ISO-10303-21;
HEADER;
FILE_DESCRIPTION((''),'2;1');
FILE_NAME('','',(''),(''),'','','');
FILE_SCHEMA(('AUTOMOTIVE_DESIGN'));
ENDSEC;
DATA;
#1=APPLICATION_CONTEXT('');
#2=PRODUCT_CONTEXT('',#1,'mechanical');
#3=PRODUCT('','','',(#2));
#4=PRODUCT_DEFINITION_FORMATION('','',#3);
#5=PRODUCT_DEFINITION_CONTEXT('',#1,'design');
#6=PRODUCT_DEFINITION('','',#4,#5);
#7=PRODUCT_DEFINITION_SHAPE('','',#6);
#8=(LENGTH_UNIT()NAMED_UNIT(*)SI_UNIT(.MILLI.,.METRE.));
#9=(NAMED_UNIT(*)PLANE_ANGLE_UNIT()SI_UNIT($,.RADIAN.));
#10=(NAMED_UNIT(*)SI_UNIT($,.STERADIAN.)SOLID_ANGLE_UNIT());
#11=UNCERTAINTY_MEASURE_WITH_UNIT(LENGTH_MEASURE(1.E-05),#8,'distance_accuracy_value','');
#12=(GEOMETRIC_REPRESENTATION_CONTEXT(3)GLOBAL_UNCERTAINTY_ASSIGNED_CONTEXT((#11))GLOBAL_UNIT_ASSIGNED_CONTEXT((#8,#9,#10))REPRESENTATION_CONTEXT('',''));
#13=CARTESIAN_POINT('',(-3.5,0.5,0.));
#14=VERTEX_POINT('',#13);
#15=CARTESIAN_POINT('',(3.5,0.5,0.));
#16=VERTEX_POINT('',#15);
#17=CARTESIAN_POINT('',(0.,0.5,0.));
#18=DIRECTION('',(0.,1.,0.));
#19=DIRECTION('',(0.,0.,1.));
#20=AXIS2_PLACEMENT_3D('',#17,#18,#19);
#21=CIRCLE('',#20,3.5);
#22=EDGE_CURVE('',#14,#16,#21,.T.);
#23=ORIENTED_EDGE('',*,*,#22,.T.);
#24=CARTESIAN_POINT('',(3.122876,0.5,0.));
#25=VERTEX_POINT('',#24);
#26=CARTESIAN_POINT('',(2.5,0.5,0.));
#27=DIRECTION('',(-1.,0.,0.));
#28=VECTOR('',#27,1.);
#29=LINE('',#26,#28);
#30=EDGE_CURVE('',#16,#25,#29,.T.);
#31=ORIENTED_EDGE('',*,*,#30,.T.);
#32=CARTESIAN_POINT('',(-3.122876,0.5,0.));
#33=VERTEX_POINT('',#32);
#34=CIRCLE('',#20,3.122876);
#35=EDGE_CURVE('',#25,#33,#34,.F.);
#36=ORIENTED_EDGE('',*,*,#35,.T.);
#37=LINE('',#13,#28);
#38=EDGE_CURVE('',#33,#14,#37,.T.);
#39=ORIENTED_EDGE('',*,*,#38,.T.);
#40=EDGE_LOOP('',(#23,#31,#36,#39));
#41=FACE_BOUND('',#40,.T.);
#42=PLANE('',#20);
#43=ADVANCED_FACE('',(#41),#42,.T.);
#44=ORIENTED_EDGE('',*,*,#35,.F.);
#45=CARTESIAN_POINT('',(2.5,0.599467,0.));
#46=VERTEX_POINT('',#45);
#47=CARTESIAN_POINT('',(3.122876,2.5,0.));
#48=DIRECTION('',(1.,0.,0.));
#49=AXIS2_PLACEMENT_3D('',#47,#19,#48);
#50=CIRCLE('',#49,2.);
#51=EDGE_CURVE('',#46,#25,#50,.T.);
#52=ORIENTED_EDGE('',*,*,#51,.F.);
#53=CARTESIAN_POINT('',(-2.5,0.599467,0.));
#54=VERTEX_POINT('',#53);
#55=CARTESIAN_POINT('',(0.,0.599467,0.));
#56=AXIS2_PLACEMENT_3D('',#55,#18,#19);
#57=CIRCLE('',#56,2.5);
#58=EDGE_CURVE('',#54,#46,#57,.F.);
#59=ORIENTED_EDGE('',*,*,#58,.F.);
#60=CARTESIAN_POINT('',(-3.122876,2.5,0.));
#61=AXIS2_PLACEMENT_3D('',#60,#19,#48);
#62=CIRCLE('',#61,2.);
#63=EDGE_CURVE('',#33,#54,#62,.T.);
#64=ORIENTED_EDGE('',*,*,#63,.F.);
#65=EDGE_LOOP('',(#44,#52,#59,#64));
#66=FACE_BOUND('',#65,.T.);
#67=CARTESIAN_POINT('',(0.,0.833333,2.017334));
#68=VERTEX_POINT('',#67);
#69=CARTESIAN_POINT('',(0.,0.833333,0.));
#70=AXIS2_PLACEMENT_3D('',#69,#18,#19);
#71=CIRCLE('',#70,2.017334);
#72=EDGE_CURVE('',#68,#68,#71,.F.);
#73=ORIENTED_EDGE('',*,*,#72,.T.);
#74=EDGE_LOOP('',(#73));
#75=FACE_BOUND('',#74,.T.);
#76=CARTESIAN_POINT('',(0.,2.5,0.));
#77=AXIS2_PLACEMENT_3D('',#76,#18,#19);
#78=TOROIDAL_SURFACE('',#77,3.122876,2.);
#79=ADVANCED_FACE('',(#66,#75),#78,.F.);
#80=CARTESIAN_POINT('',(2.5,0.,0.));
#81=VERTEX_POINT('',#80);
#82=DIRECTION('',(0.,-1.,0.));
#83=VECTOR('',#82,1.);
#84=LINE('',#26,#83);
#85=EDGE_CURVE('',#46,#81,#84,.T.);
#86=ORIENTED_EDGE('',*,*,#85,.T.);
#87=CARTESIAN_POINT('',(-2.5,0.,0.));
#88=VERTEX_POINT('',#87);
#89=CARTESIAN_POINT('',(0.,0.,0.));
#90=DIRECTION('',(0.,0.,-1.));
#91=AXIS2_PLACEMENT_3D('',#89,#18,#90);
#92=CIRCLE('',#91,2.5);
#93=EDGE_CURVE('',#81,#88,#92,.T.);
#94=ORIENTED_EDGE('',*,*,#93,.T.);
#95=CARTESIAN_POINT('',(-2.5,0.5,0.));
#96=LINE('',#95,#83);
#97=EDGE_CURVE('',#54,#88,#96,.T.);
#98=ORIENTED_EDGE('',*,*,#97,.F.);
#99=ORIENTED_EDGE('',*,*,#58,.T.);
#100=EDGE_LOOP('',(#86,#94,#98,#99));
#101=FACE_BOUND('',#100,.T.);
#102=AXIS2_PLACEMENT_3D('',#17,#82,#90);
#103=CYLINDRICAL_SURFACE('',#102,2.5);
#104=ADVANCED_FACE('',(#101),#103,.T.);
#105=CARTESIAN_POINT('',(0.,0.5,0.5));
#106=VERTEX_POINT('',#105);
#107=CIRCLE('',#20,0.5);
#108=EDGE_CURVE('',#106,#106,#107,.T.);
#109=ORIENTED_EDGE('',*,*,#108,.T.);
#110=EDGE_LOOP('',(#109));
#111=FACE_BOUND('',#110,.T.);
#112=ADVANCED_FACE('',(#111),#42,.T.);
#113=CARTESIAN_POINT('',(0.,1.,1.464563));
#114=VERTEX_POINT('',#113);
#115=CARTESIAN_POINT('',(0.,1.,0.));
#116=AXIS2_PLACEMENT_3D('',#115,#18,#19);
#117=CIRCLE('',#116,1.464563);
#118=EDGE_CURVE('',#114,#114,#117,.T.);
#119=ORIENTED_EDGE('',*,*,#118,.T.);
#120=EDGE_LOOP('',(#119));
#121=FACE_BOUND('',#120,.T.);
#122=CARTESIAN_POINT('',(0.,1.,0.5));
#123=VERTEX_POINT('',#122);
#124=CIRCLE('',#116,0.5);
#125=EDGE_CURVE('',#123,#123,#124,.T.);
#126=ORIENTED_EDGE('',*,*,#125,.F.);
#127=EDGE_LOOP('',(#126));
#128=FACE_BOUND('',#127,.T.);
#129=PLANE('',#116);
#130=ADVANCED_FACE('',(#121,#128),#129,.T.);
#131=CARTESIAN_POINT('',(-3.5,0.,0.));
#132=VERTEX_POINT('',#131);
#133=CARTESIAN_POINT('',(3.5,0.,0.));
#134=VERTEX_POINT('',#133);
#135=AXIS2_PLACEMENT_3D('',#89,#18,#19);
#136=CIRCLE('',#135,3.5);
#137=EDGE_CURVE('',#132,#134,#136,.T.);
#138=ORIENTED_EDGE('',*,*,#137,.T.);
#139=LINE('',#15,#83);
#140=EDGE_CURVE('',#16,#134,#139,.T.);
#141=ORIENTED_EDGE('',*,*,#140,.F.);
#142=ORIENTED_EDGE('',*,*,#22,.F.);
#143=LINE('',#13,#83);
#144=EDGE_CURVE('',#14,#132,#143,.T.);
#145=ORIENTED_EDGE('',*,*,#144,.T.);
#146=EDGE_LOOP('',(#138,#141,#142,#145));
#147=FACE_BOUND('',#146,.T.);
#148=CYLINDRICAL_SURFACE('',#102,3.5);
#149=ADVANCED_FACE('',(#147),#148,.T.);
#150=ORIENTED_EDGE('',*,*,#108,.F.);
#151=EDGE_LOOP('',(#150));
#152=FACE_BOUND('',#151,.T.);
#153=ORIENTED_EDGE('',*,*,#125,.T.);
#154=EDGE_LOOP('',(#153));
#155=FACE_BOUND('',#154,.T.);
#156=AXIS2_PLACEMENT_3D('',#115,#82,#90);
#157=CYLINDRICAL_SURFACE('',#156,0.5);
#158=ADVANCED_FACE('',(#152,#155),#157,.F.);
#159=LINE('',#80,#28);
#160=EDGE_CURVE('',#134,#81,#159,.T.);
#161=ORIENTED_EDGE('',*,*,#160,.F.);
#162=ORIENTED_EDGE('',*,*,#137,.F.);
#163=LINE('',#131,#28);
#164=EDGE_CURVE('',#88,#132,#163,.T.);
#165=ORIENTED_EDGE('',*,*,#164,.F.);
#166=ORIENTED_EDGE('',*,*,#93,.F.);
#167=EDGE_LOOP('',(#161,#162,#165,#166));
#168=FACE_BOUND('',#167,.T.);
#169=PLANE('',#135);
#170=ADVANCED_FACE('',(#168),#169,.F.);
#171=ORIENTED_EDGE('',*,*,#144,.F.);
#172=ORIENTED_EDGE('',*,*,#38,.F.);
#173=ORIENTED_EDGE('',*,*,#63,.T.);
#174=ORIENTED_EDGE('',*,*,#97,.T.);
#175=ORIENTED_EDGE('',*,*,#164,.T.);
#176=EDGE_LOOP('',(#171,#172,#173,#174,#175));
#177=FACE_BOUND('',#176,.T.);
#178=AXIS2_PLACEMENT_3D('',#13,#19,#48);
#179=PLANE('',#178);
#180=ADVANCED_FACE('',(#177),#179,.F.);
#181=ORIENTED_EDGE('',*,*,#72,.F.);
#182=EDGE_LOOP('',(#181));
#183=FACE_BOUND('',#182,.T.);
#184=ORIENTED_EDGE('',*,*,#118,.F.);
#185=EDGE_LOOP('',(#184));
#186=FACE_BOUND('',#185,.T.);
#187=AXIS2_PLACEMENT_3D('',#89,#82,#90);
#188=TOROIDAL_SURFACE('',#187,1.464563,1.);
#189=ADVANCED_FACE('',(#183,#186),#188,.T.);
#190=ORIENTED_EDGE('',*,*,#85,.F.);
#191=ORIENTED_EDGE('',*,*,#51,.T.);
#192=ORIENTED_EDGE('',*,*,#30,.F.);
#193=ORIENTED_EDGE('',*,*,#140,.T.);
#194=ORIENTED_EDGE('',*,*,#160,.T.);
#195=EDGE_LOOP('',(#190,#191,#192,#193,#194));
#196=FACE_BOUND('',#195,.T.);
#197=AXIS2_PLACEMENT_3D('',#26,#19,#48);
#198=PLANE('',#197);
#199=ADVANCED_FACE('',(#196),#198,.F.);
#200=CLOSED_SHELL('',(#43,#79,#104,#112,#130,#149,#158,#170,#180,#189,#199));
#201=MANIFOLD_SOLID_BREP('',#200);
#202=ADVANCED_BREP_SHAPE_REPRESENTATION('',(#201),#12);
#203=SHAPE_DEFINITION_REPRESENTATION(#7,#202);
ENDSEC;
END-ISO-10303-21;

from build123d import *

# Parameters (mm, degrees)
BOSS_EXTRUDE1_DEPTH = 0.5
SKETCH2_R           = 1.8
SKETCH2_R_2         = 0.5
BOSS_EXTRUDE2_DEPTH = 0.5
FILLET2_START       = 0.5
FILLET2_2_DEPTH     = 0.5
FILLET3_R           = 1


with BuildPart() as part:
    # Sketch1 → Boss-Extrude1 (new body)
    with BuildSketch(Plane(origin=(0, 0, 0), x_dir=(1, 0, 0), z_dir=(0, 1, 0))):
        with BuildLine():
            Line((-3.5, 0), (-2.5, 0))
            ThreePointArc((-2.5, 0), (0, 2.5), (2.5, 0))
            Line((2.5, 0), (3.5, 0))
            ThreePointArc((3.5, 0), (0, -3.5), (-3.5, 0))
        make_face()
    extrude(amount=BOSS_EXTRUDE1_DEPTH)

    # Sketch2 → Boss-Extrude2 (add)
    with BuildSketch(Plane(origin=(0, 0.5, 0), x_dir=(1, 0, 0), z_dir=(0, 1, 0))):
        with Locations(Location((0, 0, 0), (0, 0, 270))):
            Circle(SKETCH2_R)
        with Locations(Location((0, 0, 0), (0, 0, 270))):
            Circle(SKETCH2_R_2, mode=Mode.SUBTRACT)
    extrude(amount=BOSS_EXTRUDE2_DEPTH)

    # Fillet2: read off the stored shape, not the designer's step
    # Fillet2 outline → Fillet2 (revolve)
    with BuildSketch(Plane.XY):
        with BuildLine():
            ThreePointArc((3.122875656, 0.5), (2.415768875, 0.629171307), (1.8, 1))
            Line((1.8, 1), (1.8, 0.5))
            Line((1.8, 0.5), (3.122875656, 0.5))
        make_face()
    revolve(axis=Axis((0, 0, 0), (0, 1, 0)))

    # Fillet2 2 outline → Fillet2 2 (cut)
    with BuildSketch(Plane(origin=(0, 0, 0), x_dir=(1, 0, 0), z_dir=(0, 1, 0)).offset(FILLET2_START)):
        with BuildLine():
            ThreePointArc((-2.5, 0), (0, 2.5), (2.5, 0))
            Line((2.5, 0), (5, 0))
            Line((5, 0), (5, 5))
            Line((5, 5), (-5, 5))
            Line((-5, 5), (-5, 0))
            Line((-5, 0), (-2.5, 0))
        make_face()
    extrude(amount=FILLET2_2_DEPTH, mode=Mode.SUBTRACT)

    # Fillet3
    fillet3_edges = [part.edges().sort_by_distance(p)[0] for p in [
        (-1.8, 1, 0),
    ]]
    fillet(fillet3_edges, radius=FILLET3_R)


solid = part.part
